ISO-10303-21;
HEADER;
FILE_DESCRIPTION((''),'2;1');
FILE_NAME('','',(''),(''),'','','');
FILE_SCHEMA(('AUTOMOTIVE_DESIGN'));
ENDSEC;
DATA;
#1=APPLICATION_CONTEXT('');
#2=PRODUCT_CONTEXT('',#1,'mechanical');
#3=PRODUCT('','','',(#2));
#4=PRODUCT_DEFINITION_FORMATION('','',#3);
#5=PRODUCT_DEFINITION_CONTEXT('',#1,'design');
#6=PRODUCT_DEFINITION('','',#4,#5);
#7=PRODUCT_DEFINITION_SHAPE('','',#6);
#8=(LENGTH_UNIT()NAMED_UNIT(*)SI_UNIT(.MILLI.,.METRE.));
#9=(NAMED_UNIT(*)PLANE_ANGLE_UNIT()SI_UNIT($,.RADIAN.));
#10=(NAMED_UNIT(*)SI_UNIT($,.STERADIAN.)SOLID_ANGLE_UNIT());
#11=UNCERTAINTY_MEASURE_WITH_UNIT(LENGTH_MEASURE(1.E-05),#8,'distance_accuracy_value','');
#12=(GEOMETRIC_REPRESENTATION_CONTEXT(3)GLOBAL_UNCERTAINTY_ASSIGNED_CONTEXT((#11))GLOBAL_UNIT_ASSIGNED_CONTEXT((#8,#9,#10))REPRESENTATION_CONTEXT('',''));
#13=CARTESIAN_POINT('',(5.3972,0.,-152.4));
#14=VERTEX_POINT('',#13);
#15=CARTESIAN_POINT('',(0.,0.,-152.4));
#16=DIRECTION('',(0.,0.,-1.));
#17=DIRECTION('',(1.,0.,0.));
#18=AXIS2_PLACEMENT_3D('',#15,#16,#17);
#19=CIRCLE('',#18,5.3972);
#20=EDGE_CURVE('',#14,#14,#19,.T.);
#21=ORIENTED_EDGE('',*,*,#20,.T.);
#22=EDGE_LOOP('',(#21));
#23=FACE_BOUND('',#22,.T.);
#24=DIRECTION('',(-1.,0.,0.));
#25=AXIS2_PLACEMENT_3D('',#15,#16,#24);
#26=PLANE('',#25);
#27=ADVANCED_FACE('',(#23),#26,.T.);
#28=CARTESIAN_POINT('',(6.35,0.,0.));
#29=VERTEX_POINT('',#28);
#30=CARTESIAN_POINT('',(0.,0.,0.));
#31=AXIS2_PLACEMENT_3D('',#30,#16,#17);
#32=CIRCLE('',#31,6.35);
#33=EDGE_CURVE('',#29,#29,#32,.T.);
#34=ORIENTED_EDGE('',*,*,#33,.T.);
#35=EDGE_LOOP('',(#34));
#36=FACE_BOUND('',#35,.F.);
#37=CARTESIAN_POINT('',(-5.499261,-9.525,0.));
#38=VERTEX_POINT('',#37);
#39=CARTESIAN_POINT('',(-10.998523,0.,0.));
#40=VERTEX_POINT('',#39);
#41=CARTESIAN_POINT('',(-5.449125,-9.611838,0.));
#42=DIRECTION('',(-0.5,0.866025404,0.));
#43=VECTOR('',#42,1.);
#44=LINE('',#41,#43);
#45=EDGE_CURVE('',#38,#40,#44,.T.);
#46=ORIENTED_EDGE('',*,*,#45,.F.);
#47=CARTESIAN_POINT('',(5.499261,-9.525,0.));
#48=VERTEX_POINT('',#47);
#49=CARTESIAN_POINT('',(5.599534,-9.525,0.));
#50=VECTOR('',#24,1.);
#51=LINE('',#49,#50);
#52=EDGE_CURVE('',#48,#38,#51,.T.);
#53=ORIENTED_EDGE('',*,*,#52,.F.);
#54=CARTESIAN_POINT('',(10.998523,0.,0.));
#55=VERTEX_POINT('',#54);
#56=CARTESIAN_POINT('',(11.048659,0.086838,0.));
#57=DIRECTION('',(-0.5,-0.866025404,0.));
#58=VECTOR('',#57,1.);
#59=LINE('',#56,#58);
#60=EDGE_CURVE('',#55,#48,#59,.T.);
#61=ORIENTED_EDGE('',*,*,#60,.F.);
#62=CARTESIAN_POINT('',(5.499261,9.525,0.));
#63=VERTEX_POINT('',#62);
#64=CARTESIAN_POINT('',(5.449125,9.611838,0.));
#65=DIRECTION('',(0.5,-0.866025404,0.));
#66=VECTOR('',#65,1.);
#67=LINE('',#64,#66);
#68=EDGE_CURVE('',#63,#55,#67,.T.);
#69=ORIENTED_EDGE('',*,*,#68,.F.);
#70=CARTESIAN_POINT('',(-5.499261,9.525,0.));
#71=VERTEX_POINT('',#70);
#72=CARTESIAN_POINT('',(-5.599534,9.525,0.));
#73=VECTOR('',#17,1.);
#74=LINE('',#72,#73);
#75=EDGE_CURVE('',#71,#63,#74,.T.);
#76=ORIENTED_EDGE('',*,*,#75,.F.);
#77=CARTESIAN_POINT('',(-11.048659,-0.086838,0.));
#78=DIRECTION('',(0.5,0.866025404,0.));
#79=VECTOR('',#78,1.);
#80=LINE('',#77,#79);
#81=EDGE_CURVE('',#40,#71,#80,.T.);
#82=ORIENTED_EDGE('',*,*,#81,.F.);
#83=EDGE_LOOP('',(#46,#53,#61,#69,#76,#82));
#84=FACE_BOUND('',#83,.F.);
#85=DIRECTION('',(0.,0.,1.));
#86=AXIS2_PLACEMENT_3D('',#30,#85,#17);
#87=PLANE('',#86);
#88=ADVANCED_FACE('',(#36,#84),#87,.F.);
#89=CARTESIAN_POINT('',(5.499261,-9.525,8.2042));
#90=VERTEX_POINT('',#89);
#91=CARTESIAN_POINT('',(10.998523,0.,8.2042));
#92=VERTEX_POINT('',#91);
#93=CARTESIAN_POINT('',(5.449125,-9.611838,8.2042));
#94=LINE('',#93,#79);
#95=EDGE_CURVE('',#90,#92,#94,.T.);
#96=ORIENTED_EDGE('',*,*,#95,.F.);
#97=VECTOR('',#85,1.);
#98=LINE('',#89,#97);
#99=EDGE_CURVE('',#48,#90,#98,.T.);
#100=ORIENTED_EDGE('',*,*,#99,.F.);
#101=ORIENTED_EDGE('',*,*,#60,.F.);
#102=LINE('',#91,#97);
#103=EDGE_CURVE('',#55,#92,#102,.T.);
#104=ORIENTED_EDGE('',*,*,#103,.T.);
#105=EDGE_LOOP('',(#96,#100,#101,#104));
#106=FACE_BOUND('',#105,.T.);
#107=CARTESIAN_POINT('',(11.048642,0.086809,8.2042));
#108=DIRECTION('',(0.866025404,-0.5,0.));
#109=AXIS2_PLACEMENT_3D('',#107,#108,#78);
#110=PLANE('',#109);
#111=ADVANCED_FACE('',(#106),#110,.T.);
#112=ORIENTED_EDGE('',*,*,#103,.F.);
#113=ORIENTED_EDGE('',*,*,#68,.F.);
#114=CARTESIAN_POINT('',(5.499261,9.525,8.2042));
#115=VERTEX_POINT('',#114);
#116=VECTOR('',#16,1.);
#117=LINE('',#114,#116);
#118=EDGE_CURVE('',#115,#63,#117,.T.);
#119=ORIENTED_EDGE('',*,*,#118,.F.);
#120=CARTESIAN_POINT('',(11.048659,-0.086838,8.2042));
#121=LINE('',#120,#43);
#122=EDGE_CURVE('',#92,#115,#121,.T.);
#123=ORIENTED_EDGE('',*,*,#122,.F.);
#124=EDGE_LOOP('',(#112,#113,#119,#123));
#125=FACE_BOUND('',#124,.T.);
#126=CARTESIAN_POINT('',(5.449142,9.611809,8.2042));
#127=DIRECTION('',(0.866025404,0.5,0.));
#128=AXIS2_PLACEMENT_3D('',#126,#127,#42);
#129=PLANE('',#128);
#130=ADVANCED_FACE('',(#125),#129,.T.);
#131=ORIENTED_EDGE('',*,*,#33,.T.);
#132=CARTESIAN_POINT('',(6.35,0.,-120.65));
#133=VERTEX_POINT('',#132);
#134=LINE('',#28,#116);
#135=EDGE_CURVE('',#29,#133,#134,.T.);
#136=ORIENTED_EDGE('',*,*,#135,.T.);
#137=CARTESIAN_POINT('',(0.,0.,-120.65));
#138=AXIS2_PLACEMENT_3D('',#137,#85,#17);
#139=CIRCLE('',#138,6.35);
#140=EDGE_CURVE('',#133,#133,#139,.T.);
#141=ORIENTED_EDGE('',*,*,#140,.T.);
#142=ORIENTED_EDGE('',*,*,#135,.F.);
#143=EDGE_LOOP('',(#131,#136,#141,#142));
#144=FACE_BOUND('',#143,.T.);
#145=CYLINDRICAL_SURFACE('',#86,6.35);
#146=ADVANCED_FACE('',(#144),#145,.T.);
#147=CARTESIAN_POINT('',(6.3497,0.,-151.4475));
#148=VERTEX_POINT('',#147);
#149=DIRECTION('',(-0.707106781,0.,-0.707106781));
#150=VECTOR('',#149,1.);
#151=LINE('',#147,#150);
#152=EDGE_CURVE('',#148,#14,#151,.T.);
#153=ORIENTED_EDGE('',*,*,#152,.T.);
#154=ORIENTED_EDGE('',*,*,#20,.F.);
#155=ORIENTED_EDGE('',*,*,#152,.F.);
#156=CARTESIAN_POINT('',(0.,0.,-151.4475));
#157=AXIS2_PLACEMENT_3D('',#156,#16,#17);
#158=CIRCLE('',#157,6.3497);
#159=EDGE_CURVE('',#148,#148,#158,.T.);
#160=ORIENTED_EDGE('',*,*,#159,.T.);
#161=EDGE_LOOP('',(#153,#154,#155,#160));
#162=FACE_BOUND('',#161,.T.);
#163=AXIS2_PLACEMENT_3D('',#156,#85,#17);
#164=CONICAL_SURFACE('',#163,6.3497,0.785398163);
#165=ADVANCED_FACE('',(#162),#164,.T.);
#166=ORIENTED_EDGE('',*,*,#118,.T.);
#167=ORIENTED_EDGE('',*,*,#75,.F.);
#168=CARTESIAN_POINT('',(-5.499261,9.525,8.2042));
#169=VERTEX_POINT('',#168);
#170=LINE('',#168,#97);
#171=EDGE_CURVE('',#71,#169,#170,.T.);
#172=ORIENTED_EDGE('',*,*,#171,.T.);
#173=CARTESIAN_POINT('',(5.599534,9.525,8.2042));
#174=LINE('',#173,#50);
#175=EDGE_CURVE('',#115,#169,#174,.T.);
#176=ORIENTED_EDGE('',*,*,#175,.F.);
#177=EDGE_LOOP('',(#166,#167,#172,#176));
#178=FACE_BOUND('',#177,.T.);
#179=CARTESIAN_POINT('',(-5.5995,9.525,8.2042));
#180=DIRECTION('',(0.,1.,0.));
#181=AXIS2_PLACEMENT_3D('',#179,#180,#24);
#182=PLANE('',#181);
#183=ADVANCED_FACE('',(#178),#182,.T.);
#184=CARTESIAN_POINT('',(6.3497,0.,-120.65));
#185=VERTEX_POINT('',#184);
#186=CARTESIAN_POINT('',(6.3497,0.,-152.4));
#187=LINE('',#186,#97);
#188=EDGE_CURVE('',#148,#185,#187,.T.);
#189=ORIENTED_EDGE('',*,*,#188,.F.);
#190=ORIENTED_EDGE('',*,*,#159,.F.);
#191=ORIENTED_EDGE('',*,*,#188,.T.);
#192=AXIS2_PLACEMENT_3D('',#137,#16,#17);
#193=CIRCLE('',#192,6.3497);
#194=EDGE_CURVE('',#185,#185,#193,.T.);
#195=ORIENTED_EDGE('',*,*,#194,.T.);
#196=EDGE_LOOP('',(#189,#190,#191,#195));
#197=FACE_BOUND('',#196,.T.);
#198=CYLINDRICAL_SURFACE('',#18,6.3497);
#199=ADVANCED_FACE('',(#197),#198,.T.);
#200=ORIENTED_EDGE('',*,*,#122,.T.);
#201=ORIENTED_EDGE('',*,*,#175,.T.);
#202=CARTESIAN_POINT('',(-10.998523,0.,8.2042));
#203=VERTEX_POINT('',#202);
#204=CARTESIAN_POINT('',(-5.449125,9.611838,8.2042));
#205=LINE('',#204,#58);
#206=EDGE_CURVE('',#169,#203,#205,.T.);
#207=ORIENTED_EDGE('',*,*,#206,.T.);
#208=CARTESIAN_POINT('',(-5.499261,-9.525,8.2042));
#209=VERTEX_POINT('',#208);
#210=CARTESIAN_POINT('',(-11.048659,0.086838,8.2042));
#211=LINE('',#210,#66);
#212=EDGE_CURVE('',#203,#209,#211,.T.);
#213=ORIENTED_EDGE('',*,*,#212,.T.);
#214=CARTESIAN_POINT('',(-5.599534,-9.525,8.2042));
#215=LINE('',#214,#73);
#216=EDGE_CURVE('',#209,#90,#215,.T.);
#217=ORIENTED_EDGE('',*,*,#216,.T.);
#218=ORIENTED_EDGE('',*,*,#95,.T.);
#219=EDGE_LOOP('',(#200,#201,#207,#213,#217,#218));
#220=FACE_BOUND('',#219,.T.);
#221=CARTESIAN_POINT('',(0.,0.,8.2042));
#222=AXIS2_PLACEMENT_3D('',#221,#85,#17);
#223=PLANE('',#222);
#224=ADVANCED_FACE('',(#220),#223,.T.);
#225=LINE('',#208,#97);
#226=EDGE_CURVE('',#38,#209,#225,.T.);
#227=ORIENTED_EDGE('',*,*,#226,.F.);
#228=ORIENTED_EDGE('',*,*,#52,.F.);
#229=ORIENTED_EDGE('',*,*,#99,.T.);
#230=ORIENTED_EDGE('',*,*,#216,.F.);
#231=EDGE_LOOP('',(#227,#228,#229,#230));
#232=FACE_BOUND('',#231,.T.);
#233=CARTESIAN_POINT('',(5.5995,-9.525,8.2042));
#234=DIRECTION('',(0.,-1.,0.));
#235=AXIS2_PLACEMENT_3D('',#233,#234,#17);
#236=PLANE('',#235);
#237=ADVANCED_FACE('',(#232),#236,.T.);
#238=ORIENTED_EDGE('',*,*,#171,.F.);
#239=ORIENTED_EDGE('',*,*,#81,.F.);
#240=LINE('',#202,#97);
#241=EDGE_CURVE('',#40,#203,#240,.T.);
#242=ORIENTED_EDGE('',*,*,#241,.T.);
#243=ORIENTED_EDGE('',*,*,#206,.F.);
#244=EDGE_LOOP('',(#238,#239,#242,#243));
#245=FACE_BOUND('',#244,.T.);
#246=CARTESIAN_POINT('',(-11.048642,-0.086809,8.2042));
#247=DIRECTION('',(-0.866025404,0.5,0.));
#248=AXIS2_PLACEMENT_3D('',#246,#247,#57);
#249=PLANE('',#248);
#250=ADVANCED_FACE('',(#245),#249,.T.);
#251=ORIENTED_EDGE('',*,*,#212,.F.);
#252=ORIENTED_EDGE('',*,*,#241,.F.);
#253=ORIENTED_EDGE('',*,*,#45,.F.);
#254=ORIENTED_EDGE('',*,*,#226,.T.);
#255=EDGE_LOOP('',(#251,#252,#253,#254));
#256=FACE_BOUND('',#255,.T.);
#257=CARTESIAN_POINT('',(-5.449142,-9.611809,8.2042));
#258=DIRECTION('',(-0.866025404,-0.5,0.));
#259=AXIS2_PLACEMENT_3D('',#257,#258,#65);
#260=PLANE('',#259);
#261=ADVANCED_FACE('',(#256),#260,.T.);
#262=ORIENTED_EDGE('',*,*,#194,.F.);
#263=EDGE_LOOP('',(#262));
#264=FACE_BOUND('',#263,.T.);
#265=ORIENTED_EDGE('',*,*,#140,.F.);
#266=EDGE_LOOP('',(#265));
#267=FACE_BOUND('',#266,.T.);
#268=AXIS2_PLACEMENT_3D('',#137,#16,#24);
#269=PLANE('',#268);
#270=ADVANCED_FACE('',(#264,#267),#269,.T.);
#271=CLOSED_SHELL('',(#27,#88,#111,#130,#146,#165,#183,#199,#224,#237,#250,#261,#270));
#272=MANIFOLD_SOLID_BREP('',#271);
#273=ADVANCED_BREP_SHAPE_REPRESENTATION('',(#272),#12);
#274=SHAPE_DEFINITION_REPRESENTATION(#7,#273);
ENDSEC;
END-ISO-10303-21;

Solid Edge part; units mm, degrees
sketch "Sketch1" plane through (0, 0, 0) normal (0, 0, 1) x (1, 0, 0)
  circle A0 centre (0, 0) radius 11.049
  dimension "D1" = 22.098
extrude "Protrusion1" add sketch "Sketch1" along normal blind 8.2042
sketch "Sketch2" plane through (0, 0, 0) normal (0, 0, -1) x (1, 0, 0)
  circle A0 centre (0, 0) radius 6.35
extrude "Protrusion2" add sketch "Sketch2" along normal blind 152.4
sketch "Sketch3" plane through (0, 0, -152.4) normal (0, 0, -1) x (1, 0, 0)
  circle A0 centre (0, 0) radius 6.3497
extrude "Cutout1" cut sketch "Sketch3" against normal blind 31.75 flip side to cut
chamfer "Chamfer_1" distance 0.9525 angle 45 1 edges at (-6.3497, 0, -152.4)
sketch "Sketch4" plane through (0, 0, 8.2042) normal (0, 0, 1) x (1, 0, 0)
  line L0 (-5.5995, 9.525) -> (5.5995, 9.525)
  dimension "D1" = 19.05
extrude "Cutout2" cut sketch "Sketch4" against normal up to next material side at (0, 9.575, 8.2042)
pattern_circular "Pattern1" count 6 over 360 about axis through (0, 0, 8.2042) along (0, 0, 1) of "Cutout2"
properties part number "24102178"
